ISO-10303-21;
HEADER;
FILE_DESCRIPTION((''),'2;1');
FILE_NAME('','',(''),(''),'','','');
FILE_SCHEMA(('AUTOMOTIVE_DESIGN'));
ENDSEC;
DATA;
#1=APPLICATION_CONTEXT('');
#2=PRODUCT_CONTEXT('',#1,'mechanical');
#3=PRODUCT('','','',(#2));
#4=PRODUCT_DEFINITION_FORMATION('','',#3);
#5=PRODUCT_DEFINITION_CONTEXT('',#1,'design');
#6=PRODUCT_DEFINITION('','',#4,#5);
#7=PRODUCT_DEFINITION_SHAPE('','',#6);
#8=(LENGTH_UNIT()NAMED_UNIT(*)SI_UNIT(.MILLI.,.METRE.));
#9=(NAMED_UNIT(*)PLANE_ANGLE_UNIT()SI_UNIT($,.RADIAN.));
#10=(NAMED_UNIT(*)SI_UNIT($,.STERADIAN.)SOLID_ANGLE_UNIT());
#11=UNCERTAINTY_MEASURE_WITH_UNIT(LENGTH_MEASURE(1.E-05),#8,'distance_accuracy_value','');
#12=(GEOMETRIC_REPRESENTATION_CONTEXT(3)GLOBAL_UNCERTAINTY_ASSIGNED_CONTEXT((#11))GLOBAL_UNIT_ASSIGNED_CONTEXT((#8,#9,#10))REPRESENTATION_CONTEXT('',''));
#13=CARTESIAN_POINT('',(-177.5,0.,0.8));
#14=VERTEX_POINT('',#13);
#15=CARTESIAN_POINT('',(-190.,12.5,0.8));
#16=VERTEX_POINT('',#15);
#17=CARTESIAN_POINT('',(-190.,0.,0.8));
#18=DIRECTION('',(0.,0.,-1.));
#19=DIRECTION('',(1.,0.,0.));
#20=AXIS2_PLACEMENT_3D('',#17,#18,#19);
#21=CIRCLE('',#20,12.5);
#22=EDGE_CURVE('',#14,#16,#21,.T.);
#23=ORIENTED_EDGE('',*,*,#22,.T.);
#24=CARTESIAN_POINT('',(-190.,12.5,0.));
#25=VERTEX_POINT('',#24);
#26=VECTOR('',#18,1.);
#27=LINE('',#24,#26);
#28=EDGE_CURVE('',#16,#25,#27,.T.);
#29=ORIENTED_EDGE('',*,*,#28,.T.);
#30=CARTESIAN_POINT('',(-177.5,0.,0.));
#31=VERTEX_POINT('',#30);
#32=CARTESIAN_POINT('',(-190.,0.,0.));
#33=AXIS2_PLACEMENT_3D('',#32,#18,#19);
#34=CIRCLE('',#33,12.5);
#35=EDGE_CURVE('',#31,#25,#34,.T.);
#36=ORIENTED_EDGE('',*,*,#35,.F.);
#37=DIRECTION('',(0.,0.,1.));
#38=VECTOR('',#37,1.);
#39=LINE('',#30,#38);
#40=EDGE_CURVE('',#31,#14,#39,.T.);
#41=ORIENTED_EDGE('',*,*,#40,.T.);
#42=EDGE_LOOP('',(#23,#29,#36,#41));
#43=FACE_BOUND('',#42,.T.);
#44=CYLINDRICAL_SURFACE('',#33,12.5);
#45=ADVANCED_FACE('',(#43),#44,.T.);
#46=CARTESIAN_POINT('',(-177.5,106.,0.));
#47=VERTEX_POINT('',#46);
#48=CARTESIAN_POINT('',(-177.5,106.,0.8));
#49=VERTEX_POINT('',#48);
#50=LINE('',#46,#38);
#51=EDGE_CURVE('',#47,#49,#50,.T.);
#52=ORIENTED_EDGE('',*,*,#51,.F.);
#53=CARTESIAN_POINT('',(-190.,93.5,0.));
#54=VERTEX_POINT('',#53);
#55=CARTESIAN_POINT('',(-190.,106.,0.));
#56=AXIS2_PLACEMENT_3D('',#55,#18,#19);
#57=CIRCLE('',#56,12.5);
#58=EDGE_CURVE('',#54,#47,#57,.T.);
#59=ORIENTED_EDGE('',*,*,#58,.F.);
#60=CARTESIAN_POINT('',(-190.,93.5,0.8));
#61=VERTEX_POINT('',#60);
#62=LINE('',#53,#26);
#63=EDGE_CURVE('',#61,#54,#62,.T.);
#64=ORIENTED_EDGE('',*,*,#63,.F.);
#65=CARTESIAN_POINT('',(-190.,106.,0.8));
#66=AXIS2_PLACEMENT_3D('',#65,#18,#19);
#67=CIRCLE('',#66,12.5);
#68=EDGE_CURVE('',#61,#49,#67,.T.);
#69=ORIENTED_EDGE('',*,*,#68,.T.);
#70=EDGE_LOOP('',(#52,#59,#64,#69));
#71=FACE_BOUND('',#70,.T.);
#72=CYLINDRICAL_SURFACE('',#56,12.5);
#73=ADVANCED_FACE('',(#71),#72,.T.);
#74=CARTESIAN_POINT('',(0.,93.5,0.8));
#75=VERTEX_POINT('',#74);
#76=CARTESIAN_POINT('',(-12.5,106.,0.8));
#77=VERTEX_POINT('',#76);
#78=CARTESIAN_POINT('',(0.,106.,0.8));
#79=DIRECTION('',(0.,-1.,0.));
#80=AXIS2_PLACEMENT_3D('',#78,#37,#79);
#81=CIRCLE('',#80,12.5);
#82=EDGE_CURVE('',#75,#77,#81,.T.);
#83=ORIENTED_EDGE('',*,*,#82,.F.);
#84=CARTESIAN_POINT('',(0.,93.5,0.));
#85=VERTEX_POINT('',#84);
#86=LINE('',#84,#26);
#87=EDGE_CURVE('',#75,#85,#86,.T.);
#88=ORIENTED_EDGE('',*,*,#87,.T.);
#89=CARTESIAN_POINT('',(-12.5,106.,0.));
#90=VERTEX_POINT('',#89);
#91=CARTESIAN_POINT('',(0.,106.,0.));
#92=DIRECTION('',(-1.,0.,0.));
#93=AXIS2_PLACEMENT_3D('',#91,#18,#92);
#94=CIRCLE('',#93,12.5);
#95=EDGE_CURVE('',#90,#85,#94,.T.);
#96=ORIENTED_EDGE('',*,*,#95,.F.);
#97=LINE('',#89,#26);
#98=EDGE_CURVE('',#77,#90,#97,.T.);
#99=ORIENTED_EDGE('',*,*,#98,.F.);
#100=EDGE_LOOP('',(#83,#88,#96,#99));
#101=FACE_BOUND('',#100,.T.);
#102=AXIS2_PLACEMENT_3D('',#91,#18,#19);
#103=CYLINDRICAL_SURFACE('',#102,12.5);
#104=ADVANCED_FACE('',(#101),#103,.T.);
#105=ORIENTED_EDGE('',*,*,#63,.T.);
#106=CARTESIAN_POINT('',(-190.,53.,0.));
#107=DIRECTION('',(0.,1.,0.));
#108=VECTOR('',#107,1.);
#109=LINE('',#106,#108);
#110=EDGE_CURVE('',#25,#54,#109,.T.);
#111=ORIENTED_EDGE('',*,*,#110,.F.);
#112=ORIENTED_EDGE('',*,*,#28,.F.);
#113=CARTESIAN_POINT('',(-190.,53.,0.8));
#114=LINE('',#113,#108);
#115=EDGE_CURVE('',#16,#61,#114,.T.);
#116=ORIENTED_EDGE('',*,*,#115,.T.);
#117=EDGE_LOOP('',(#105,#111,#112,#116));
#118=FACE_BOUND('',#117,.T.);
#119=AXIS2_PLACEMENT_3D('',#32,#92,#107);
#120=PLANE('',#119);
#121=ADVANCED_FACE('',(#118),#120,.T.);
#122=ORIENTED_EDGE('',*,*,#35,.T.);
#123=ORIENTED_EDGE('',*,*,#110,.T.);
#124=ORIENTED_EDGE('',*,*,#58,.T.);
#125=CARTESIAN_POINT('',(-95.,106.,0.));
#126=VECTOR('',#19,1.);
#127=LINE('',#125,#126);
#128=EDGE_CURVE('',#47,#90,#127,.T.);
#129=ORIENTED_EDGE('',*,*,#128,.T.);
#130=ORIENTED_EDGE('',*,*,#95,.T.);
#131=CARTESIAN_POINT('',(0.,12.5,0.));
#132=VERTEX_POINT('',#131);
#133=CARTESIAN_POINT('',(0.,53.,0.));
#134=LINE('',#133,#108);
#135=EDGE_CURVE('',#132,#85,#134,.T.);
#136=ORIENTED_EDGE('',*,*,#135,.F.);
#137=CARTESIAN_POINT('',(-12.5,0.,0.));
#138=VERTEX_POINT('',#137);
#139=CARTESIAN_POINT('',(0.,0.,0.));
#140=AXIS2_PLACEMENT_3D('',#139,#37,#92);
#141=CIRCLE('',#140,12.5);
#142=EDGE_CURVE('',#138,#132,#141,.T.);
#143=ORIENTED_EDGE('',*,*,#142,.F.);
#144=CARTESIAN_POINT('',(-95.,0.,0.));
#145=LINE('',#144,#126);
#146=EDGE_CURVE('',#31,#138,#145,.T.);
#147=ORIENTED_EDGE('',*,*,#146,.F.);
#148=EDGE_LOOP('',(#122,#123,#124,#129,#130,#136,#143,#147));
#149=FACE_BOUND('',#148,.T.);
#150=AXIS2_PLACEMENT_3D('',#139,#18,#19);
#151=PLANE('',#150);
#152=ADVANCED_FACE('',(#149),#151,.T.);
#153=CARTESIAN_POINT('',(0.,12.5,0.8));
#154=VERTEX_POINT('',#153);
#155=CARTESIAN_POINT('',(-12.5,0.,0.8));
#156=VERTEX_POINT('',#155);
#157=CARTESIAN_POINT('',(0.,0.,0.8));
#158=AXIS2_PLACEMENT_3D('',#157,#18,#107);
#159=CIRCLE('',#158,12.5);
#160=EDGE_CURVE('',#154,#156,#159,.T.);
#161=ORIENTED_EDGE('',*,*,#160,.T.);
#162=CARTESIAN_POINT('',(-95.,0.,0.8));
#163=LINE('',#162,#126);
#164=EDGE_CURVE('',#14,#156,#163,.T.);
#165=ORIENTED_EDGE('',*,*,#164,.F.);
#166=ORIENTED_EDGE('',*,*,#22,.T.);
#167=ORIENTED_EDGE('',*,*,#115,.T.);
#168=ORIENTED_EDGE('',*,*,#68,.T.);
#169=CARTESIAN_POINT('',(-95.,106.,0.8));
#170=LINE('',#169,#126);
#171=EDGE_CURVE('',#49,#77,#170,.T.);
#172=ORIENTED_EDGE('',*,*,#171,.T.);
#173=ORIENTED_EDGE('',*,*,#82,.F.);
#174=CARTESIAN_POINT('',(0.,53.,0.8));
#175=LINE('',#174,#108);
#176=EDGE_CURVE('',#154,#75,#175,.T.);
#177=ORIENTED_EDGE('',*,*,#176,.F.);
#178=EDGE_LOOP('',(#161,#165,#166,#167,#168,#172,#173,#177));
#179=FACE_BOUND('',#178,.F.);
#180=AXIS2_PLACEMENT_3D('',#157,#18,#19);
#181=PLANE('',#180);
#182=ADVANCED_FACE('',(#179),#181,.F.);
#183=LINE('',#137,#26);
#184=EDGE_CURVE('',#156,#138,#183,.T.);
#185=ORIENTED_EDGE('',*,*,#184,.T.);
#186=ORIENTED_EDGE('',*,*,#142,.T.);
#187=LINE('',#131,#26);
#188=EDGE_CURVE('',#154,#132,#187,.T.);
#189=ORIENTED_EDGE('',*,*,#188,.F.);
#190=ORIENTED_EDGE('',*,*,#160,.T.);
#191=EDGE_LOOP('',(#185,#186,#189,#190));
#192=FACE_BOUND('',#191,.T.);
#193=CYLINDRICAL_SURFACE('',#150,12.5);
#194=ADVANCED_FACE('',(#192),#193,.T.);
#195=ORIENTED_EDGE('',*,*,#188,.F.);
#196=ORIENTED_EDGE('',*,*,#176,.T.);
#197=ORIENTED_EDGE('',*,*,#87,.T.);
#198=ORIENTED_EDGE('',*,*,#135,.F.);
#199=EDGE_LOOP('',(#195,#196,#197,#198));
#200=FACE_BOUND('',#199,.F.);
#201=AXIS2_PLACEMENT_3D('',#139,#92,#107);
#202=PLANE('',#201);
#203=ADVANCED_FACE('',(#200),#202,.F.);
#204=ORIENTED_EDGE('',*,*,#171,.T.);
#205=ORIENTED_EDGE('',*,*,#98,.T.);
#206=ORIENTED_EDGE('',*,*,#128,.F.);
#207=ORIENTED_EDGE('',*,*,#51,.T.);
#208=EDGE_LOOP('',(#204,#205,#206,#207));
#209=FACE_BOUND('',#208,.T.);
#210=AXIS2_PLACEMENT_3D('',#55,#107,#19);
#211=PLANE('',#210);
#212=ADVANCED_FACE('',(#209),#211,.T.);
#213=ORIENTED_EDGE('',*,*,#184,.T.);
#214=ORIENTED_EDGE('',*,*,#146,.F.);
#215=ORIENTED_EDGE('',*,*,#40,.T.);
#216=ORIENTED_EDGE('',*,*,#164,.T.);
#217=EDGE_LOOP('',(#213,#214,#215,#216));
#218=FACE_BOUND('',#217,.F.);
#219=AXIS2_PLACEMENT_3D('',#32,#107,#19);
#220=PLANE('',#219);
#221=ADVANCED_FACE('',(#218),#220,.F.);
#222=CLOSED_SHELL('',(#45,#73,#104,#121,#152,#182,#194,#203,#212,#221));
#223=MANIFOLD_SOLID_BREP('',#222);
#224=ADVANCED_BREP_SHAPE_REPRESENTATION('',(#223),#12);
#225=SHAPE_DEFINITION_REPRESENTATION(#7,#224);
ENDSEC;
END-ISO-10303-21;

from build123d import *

# Parameters (mm, degrees)
F0_W     = 190
F0_H     = 106
F1_DEPTH = 0.8
F2_R     = 12.5
F3_DEPTH = 0.8


# Not quite as in the source:
# - a feature names something its author has since deleted; it is built from what else it names


with BuildPart() as f1:
    # F0 (on Top) → F1 (new body)
    with BuildSketch(Plane.XY):
        with Locations((-95, 53)):
            Rectangle(F0_W, F0_H)
    extrude(amount=F1_DEPTH)

    # F2 (on face) → F3 (join)
    with BuildSketch(Plane(origin=(0, 0, 0), x_dir=(1, 0, 0), z_dir=(0, 0, -1))):
        Circle(F2_R)
        with Locations((-190, 0)):
            Circle(F2_R)
        with Locations((-190, -106)):
            Circle(F2_R)
        with Locations((0, -106)):
            Circle(F2_R)
    extrude(amount=-F3_DEPTH)


solid = f1.part
